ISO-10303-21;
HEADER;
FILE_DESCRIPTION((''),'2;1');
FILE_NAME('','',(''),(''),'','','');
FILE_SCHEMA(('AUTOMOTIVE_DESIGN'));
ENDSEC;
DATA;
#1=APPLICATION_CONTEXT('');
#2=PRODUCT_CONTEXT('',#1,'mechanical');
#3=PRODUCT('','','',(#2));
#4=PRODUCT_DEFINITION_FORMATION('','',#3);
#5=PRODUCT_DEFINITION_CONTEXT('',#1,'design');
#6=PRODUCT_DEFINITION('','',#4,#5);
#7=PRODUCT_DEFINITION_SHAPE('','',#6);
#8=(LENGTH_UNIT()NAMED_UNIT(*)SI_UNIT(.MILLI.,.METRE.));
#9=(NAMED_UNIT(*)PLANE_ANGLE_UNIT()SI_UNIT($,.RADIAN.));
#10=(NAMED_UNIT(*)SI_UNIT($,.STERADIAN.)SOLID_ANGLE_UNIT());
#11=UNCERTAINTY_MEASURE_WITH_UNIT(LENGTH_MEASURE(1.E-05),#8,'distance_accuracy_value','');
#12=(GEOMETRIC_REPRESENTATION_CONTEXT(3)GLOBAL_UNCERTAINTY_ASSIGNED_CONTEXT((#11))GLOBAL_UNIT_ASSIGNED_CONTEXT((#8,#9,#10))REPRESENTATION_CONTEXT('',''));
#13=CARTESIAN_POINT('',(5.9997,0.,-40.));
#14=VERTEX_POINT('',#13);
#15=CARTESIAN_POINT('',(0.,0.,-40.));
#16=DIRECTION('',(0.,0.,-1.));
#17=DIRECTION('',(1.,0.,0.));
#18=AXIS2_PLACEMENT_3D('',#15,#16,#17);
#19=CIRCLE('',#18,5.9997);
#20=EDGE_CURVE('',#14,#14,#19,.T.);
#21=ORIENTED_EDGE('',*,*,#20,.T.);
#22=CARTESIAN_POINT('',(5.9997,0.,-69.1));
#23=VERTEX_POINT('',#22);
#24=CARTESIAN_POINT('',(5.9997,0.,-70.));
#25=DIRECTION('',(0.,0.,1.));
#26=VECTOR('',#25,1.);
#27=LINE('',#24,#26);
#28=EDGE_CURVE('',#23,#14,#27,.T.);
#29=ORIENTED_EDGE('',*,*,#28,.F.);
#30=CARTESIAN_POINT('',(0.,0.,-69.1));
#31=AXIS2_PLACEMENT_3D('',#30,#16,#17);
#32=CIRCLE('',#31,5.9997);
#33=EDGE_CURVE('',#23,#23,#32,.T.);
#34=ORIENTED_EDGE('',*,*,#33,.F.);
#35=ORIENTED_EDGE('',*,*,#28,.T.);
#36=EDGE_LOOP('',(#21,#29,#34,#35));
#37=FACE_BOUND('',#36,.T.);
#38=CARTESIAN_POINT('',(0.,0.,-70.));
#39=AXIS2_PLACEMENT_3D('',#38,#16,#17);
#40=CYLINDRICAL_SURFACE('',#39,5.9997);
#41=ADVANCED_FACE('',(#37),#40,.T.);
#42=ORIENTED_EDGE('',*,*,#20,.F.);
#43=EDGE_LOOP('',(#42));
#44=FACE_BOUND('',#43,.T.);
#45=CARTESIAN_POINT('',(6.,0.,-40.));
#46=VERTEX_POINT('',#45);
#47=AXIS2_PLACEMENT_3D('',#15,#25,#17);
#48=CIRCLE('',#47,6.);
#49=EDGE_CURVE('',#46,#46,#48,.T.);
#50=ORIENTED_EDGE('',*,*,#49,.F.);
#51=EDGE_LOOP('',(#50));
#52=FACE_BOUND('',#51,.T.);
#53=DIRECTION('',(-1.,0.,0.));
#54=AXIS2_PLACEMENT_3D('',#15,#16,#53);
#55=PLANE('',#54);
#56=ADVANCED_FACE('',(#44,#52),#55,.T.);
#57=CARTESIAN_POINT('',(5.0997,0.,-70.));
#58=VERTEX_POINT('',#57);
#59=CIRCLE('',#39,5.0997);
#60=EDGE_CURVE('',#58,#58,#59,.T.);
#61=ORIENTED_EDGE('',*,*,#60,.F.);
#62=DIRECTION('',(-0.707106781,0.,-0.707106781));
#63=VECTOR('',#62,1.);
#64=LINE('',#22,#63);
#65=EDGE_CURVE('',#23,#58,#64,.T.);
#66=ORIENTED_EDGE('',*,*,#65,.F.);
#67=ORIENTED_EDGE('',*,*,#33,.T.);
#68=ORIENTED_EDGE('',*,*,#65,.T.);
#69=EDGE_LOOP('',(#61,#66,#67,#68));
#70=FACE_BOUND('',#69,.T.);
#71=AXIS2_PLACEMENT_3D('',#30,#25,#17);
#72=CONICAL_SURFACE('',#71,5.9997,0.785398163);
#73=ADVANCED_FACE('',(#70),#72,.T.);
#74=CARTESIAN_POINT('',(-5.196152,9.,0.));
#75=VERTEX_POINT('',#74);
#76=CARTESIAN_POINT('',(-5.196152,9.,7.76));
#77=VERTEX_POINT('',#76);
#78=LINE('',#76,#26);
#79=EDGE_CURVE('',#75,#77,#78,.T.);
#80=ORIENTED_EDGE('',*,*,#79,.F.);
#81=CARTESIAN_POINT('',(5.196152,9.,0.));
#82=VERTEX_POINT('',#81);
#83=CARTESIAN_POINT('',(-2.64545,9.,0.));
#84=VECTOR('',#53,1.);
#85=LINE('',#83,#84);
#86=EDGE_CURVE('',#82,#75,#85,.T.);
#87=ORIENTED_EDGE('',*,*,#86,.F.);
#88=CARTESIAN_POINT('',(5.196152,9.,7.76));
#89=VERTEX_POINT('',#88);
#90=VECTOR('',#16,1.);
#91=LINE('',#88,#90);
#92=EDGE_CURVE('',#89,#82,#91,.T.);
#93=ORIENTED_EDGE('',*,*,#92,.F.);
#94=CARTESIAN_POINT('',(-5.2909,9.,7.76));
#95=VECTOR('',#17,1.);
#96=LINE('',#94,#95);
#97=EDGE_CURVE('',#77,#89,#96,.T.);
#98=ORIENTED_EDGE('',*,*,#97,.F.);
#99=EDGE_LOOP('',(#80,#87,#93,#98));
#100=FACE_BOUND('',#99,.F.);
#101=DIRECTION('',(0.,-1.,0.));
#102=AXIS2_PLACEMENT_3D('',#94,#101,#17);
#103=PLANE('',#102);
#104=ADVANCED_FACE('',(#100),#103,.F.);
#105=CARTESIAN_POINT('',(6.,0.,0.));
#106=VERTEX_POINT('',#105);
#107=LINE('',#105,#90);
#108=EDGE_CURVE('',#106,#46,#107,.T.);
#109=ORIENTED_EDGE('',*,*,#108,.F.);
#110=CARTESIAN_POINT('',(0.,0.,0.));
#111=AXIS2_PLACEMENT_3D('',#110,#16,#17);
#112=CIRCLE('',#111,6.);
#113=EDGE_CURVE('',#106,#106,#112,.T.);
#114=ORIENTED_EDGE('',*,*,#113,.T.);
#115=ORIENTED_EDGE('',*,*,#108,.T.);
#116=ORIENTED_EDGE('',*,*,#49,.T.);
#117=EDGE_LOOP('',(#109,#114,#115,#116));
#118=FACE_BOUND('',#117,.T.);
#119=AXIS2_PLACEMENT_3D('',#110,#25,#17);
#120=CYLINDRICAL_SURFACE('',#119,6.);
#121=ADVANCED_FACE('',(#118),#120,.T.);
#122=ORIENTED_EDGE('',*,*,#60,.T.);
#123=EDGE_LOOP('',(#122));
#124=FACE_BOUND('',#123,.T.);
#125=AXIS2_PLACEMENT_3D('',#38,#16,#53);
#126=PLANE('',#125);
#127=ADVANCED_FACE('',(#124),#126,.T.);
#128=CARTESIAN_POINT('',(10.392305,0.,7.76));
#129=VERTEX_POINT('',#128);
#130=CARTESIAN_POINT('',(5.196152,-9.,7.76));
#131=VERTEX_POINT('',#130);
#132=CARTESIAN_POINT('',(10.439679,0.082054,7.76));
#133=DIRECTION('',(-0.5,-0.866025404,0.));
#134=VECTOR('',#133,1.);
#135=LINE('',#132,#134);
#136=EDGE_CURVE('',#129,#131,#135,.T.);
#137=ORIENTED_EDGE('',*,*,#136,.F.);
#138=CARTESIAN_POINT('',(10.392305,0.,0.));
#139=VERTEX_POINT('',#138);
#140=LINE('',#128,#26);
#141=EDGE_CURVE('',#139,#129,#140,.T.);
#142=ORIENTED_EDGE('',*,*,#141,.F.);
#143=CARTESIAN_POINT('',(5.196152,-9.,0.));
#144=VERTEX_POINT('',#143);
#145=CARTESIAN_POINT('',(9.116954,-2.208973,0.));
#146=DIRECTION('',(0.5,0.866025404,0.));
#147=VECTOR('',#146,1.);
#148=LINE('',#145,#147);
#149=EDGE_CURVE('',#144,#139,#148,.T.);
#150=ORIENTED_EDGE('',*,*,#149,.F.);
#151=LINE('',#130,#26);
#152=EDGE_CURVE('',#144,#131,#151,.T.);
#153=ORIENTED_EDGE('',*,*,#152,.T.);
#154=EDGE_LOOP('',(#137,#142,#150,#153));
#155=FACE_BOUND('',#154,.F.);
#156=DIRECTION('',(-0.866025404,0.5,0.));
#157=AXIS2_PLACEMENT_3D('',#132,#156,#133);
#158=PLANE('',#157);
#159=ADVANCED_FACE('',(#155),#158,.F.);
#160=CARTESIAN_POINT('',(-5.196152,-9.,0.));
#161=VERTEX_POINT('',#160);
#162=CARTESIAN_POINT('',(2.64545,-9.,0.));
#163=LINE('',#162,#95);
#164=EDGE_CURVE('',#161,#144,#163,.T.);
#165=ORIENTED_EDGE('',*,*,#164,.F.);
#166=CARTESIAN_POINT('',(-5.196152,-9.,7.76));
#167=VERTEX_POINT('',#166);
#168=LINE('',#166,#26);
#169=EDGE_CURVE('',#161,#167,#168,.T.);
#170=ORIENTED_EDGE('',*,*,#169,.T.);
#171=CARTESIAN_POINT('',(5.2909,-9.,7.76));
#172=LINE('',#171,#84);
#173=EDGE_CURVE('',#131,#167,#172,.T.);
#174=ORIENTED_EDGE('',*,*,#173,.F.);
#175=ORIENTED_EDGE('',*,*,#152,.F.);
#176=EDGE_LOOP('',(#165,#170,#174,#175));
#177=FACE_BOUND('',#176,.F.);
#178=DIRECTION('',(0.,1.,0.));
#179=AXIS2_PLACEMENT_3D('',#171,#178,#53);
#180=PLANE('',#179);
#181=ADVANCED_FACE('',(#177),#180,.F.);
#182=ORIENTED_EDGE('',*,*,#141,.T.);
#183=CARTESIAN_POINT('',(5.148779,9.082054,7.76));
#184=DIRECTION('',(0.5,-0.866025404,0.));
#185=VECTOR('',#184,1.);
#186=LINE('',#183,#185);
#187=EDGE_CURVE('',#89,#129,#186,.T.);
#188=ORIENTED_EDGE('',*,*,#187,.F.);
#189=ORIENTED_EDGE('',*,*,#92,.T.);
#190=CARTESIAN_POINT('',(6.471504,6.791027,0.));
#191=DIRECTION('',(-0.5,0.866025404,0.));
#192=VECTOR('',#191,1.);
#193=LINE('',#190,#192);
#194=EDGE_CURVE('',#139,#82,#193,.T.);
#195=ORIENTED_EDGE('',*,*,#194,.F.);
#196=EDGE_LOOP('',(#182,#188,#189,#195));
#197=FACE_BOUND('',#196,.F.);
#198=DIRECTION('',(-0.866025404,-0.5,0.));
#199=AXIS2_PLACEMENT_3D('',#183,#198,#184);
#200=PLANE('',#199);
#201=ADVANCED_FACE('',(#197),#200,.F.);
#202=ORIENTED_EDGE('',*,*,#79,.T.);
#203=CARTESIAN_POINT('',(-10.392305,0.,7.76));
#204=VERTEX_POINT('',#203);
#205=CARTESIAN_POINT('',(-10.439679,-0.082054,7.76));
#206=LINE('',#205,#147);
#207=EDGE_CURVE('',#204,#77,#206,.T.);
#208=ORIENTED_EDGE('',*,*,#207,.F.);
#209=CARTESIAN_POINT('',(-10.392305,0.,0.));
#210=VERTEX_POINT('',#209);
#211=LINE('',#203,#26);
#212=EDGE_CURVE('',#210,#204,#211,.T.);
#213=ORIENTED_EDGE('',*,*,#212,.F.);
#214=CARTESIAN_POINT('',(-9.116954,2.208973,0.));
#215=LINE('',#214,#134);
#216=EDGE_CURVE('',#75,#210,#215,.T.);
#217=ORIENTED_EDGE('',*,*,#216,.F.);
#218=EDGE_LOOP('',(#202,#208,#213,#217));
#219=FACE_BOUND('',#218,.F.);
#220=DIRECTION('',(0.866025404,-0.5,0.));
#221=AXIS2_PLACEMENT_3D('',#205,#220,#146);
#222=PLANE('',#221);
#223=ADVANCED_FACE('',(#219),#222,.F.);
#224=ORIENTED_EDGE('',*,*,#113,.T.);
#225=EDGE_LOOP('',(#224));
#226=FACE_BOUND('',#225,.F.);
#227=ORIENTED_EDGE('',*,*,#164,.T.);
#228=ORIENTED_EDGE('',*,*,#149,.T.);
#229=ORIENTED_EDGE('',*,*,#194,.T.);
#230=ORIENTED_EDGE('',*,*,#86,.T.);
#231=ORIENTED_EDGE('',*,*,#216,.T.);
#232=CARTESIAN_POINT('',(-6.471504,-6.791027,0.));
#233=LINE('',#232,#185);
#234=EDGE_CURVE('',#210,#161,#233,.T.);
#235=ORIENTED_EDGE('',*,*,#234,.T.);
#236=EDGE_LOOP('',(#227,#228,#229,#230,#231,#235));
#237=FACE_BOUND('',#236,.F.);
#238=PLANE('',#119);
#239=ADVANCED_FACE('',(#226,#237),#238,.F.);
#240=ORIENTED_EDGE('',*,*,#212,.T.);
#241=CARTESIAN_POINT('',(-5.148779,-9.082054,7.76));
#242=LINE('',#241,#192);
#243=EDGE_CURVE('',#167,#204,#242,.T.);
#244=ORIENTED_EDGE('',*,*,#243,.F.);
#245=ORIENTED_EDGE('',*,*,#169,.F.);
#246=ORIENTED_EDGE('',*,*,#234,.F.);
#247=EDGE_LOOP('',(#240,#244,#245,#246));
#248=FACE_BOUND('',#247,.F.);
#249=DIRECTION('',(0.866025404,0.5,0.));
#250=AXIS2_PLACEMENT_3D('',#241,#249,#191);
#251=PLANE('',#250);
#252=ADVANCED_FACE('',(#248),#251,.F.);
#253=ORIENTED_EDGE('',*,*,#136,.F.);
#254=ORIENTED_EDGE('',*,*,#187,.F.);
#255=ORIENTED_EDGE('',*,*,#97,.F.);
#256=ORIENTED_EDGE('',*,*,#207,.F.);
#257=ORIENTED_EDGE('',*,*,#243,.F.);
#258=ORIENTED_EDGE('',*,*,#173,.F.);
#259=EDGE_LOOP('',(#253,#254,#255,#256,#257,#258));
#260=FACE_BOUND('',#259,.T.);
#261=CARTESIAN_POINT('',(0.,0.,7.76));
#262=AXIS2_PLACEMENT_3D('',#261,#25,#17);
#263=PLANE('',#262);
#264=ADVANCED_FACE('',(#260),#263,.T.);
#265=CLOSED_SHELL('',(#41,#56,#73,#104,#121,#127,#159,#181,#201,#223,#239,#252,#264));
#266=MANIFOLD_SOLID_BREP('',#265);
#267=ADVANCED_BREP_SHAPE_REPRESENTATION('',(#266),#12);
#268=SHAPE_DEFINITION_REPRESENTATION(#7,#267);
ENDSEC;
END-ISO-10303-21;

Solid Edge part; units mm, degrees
sketch "Sketch1" plane through (0, 0, 0) normal (0, 0, 1) x (1, 0, 0)
  circle A0 centre (0, 0) radius 10.44
  dimension "D1" = 20.88
extrude "Protrusion1" add sketch "Sketch1" along normal blind 7.76
sketch "Sketch2" plane through (0, 0, 0) normal (0, 0, -1) x (1, 0, 0)
  circle A0 centre (0, 0) radius 6
extrude "Protrusion2" add sketch "Sketch2" along normal blind 70
sketch "Sketch3" plane through (0, 0, -70) normal (0, 0, -1) x (1, 0, 0)
  circle A0 centre (0, 0) radius 5.9997
extrude "Cutout1" cut sketch "Sketch3" against normal blind 30 flip side to cut
chamfer "Chamfer_1" distance 0.9 angle 45 1 edges at (-5.9997, 0, -70)
sketch "Sketch4" plane through (0, 0, 7.76) normal (0, 0, 1) x (1, 0, 0)
  line L0 (-5.2909, 9) -> (5.2909, 9)
  dimension "D1" = 18
extrude "Cutout2" cut sketch "Sketch4" against normal up to next material side at (0, 9.05, 7.76)
pattern_circular "Pattern1" count 6 over 360 about axis through (0, 0, 7.76) along (0, 0, 1) of "Cutout2"
properties part number "24104764"
